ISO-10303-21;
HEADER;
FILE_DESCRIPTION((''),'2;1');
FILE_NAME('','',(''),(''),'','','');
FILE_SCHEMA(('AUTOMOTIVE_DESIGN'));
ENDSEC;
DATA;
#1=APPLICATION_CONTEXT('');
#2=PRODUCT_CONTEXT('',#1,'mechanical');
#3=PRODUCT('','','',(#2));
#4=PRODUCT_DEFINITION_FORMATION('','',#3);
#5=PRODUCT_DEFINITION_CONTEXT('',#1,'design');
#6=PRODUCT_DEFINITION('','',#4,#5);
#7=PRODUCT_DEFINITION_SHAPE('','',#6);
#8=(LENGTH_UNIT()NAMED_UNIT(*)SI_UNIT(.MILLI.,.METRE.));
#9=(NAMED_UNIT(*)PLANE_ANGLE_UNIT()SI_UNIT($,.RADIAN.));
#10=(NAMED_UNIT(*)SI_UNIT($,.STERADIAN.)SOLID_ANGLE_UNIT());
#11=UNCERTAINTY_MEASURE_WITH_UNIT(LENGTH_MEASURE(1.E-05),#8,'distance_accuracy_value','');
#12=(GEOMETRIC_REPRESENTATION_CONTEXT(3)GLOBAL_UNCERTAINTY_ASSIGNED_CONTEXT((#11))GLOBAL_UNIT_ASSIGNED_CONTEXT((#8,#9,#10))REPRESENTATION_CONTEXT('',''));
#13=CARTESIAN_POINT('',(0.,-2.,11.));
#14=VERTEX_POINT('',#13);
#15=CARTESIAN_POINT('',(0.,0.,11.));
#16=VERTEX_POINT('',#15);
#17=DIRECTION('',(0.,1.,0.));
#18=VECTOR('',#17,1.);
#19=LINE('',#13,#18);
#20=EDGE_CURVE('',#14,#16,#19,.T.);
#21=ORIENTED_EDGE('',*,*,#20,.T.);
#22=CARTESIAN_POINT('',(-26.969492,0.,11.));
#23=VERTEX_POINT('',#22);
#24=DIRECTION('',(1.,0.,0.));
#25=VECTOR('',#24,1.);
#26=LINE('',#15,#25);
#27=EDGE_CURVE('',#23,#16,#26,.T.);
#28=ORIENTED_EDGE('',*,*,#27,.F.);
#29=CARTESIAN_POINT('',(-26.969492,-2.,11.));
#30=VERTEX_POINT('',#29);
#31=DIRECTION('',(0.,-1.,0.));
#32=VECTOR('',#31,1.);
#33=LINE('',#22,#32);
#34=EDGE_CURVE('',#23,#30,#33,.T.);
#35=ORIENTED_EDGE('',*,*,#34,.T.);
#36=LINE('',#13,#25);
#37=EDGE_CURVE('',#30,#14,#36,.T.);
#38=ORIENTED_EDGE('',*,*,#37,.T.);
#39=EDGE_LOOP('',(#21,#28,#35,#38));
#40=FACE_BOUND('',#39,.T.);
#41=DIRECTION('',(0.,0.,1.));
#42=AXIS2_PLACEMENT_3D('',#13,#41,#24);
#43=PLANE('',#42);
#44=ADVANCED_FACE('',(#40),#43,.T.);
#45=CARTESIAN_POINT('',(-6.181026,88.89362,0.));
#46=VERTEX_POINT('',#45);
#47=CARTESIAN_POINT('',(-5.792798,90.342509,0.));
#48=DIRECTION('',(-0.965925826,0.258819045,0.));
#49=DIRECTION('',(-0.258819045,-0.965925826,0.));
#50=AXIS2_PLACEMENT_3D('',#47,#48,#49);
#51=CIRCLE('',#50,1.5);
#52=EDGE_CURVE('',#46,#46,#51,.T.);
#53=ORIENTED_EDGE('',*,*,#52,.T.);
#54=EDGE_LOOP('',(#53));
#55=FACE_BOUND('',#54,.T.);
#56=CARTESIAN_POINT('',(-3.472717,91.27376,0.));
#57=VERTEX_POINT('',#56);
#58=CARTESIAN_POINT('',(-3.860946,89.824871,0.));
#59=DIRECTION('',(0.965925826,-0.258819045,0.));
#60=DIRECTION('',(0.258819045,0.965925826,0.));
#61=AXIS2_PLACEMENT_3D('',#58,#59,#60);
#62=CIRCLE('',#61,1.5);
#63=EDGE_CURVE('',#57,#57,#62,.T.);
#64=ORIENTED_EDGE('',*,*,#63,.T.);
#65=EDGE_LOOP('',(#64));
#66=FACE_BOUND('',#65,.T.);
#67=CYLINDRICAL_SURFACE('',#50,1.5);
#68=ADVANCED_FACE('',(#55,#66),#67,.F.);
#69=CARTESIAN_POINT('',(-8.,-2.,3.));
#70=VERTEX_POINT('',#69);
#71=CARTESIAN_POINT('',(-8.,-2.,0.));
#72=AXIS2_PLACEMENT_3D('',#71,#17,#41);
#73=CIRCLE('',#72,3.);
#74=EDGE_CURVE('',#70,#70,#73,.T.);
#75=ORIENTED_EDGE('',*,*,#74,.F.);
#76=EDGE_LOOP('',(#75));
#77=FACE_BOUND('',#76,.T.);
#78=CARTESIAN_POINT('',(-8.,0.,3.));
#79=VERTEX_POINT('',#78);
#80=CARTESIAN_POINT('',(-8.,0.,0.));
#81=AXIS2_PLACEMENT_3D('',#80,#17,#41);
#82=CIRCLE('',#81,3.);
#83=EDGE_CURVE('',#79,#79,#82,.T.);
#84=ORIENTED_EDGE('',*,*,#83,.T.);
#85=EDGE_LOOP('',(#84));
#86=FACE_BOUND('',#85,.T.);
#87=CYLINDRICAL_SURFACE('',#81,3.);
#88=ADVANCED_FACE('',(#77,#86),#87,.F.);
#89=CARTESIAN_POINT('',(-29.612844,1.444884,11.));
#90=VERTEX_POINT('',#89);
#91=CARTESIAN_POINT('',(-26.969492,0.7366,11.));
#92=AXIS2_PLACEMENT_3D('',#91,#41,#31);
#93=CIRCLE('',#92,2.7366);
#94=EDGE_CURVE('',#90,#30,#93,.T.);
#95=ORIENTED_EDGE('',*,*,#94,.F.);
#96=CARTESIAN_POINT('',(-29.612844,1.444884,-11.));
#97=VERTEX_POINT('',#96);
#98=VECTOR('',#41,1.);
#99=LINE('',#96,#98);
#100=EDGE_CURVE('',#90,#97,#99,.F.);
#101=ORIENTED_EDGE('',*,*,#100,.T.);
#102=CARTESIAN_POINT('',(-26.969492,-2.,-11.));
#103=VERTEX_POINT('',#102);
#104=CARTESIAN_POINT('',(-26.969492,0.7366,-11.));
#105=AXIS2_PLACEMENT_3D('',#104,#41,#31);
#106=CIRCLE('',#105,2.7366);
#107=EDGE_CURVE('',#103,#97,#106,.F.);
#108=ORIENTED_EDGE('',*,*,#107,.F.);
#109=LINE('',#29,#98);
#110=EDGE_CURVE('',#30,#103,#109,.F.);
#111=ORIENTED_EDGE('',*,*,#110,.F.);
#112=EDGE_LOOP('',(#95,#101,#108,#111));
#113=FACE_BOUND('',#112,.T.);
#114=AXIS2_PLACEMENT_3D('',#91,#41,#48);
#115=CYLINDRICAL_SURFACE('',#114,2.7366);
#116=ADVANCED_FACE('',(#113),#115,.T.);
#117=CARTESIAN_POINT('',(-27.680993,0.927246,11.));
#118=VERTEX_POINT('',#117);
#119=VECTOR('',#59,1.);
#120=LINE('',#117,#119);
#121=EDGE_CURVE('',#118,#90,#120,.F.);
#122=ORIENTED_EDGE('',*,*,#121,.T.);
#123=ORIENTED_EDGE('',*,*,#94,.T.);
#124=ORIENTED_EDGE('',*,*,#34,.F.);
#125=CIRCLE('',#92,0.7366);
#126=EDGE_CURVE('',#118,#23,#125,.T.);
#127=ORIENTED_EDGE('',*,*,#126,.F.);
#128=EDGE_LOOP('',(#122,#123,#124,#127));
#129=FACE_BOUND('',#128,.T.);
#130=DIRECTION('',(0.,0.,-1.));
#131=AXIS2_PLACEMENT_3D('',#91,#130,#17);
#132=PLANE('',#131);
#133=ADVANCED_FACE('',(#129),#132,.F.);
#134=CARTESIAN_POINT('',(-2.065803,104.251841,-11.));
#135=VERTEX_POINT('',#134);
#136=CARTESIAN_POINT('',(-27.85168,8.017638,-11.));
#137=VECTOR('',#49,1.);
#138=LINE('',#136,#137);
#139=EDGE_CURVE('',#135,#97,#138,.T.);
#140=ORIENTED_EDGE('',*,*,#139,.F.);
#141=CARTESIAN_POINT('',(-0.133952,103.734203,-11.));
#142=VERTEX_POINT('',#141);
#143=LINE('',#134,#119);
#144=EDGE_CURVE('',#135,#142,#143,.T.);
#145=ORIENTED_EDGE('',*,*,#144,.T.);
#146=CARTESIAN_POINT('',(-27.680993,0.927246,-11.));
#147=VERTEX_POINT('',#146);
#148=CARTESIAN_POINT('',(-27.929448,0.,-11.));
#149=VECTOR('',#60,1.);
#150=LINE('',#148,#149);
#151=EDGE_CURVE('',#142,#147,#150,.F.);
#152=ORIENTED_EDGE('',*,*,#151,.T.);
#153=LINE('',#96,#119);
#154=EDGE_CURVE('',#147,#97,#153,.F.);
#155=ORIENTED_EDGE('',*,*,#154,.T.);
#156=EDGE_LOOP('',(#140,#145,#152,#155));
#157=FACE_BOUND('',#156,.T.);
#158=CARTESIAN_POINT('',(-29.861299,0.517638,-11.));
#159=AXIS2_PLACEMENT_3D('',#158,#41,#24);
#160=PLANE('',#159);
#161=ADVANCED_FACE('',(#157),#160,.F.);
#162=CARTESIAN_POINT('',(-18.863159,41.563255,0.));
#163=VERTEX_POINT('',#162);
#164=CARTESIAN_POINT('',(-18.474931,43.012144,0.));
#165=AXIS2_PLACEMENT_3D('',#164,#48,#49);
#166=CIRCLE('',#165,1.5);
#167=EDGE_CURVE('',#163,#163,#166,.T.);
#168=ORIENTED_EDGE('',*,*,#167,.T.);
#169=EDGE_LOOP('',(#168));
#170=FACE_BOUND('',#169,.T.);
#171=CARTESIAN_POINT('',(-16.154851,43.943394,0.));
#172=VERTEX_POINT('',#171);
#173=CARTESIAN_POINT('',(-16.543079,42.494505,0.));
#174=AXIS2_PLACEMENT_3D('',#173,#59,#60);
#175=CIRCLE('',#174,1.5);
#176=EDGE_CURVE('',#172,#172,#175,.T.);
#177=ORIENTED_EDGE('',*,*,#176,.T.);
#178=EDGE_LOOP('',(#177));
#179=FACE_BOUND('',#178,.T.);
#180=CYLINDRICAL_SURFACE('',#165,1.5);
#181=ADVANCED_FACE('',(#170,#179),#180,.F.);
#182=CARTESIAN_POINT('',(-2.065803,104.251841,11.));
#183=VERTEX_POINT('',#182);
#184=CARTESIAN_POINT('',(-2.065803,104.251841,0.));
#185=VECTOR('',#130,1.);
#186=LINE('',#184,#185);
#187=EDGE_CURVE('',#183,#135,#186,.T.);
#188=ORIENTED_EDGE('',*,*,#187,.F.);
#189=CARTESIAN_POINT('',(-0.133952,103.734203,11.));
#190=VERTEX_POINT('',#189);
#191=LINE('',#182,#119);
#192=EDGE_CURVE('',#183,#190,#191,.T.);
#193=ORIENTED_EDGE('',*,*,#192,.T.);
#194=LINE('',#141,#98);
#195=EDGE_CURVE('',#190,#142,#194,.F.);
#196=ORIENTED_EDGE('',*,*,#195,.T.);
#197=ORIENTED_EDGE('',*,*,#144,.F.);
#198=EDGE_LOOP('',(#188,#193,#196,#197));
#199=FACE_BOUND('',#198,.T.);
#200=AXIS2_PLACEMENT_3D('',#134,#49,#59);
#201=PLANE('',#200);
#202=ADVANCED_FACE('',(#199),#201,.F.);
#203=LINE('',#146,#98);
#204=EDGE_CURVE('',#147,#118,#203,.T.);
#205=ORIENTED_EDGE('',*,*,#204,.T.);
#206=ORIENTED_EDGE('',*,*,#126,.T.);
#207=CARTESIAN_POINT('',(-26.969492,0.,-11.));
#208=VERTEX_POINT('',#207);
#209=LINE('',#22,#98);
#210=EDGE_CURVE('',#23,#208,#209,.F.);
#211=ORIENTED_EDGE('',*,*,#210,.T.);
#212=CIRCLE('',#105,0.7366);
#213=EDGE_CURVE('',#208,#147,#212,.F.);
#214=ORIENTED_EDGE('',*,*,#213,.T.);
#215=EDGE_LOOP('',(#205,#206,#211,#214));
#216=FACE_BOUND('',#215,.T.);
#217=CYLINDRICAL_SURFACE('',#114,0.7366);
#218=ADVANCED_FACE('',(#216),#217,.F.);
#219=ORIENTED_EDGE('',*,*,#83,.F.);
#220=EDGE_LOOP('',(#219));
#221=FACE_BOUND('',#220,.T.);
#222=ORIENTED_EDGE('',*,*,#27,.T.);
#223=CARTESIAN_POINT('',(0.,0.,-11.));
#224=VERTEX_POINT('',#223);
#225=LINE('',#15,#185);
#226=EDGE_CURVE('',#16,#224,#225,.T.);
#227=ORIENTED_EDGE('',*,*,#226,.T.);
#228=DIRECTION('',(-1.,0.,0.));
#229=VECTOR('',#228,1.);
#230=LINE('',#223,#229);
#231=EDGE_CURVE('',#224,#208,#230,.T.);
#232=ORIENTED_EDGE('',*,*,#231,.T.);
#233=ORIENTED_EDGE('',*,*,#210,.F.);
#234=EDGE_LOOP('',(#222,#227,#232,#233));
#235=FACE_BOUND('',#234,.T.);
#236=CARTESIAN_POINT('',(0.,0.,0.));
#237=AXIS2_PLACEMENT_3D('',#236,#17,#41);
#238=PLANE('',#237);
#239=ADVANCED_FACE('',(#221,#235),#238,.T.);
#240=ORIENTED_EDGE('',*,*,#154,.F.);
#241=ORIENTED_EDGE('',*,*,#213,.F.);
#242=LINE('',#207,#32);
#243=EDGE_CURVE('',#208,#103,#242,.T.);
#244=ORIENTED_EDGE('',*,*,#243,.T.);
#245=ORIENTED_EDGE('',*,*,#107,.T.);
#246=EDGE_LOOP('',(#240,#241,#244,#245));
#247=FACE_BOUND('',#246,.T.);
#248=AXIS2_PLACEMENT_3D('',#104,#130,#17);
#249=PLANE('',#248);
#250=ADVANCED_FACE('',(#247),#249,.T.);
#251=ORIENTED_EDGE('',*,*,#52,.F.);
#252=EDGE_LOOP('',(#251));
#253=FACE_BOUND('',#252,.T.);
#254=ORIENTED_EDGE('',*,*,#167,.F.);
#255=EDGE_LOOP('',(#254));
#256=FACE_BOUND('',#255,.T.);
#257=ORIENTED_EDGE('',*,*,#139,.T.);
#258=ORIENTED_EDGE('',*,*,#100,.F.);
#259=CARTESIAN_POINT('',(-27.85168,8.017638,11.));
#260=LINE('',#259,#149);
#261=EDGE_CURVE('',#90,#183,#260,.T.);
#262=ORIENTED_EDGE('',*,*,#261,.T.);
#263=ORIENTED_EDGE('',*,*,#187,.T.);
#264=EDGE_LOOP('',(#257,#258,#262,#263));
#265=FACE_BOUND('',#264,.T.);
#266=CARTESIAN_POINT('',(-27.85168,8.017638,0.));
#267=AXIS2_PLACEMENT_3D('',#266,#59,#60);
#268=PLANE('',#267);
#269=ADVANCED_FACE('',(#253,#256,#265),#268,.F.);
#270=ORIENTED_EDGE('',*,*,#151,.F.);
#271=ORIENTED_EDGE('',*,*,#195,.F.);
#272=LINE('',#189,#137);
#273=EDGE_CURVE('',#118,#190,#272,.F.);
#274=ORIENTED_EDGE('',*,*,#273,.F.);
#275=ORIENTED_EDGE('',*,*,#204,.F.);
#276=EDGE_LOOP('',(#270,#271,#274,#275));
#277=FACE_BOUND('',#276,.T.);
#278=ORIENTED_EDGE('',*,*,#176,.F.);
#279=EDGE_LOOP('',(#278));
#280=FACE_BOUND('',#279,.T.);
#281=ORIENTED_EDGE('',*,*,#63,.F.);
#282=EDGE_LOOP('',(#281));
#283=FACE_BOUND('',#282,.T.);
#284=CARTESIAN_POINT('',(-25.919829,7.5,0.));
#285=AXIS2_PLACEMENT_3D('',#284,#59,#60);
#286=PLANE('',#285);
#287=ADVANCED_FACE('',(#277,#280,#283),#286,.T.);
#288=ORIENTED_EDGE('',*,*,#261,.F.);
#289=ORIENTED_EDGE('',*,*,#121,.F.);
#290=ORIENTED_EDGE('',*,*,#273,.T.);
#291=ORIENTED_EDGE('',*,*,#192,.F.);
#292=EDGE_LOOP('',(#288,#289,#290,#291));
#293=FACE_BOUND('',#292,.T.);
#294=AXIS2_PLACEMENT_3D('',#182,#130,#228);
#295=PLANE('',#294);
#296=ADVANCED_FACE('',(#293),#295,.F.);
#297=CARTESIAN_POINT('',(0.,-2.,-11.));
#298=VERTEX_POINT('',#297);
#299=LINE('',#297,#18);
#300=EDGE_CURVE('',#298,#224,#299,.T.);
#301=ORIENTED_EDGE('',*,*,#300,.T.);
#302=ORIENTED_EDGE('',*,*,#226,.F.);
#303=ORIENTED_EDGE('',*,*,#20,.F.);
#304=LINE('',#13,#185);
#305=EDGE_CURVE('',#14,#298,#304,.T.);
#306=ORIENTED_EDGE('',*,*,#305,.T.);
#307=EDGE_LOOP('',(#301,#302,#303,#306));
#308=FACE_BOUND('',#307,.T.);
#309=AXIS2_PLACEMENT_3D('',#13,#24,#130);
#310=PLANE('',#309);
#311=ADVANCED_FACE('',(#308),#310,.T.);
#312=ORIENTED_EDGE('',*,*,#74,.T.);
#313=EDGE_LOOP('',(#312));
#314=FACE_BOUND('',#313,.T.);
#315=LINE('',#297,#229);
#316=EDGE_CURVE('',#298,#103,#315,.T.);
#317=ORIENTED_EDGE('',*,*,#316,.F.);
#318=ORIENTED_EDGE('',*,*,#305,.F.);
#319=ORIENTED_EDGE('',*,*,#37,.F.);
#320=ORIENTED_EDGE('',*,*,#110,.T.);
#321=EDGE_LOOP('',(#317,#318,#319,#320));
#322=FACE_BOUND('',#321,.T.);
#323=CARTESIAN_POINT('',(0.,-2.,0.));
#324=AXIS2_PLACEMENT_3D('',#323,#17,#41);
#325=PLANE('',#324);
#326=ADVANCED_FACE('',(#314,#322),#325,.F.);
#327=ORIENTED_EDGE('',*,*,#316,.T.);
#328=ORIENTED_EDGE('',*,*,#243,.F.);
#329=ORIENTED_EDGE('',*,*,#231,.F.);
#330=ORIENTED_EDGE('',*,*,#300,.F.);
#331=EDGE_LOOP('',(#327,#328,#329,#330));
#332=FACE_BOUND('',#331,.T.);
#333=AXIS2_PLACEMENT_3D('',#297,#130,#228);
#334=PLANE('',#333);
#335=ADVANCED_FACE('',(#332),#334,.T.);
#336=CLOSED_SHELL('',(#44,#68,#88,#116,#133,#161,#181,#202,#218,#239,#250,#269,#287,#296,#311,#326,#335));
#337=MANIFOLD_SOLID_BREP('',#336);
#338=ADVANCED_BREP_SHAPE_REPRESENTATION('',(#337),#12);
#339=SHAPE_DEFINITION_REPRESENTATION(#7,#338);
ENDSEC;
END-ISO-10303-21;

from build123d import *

# Parameters (mm, degrees)
SKETCH2_W                 = 30
SKETCH2_H                 = 22
BASE_FLANGE1_DEPTH        = 2
EDGE_FLANGE1_START        = -11
EDGE_FLANGE1_DEPTH        = 22
EDGE_FLANGE1_2_DEPTH      = 22
F_6_0MM_DOWEL_HOLE1_D     = 6
F_6_0MM_DOWEL_HOLE1_DEPTH = 2
F_3_0MM_DOWEL_HOLE1_D     = 3


# Read off the part's stored shape, not the designer's step: Edge-Flange1
# Sheet-metal steps are written as plain solids
with BuildPart() as part:
    # Sketch2 → Base-Flange1 (new body)
    with BuildSketch(Plane(origin=(0, 0, 0), x_dir=(1, 0, 0), z_dir=(0, 1, 0))):
        with Locations((-15, 0)):
            Rectangle(SKETCH2_W, SKETCH2_H)
    extrude(amount=-BASE_FLANGE1_DEPTH)

    # Edge-Flange1 outline → Edge-Flange1 (cut)
    with BuildSketch(Plane.XY.offset(EDGE_FLANGE1_START)):
        with BuildLine():
            ThreePointArc((-26.96949183, -2), (-28.62375904, -1.443395312), (-29.605094228, 0))
            Line((-29.605094228, 0), (-30, 0))
            Line((-30, 0), (-30, -2))
            Line((-30, -2), (-26.96949183, -2))
        make_face()
    extrude(amount=EDGE_FLANGE1_DEPTH, mode=Mode.SUBTRACT)

    # Edge-Flange1 2 outline → Edge-Flange1 2 (add)
    with BuildSketch(Plane.XY.offset(EDGE_FLANGE1_START)):
        with BuildLine():
            Line((-2.065803424, 104.251840892), (-29.612844446, 1.444884199))
            ThreePointArc((-29.612844446, 1.444884199), (-29.706052463, 0.721921355), (-29.605094228, 0))
            Line((-29.605094228, 0), (-26.96949183, 0))
            ThreePointArc((-26.96949183, 0), (-27.5538759, 0.288186332), (-27.680992793, 0.927246109))
            Line((-27.680992793, 0.927246109), (-0.133951771, 103.734202802))
            Line((-0.133951771, 103.734202802), (-2.065803424, 104.251840892))
        make_face()
    extrude(amount=EDGE_FLANGE1_2_DEPTH)

    # Ø6.0mm Dowel Hole1
    with Locations(Plane(origin=(0, 0, 0), x_dir=(1, 0, 0), z_dir=(0, 1, 0))):
        with Locations((-8, 0)):
            Hole(F_6_0MM_DOWEL_HOLE1_D / 2, depth=F_6_0MM_DOWEL_HOLE1_DEPTH)

    # Ø3.0mm Dowel Hole1 (through all)
    with Locations(Plane(origin=(-27.990381057, 7.5, 0), x_dir=(0, 0, 1), z_dir=(-0.9659258262890691, 0.258819045102518, 0))):
        with Locations((0, 85.764876286), (0, 36.764876286)):
            Hole(F_3_0MM_DOWEL_HOLE1_D / 2)


solid = part.part
